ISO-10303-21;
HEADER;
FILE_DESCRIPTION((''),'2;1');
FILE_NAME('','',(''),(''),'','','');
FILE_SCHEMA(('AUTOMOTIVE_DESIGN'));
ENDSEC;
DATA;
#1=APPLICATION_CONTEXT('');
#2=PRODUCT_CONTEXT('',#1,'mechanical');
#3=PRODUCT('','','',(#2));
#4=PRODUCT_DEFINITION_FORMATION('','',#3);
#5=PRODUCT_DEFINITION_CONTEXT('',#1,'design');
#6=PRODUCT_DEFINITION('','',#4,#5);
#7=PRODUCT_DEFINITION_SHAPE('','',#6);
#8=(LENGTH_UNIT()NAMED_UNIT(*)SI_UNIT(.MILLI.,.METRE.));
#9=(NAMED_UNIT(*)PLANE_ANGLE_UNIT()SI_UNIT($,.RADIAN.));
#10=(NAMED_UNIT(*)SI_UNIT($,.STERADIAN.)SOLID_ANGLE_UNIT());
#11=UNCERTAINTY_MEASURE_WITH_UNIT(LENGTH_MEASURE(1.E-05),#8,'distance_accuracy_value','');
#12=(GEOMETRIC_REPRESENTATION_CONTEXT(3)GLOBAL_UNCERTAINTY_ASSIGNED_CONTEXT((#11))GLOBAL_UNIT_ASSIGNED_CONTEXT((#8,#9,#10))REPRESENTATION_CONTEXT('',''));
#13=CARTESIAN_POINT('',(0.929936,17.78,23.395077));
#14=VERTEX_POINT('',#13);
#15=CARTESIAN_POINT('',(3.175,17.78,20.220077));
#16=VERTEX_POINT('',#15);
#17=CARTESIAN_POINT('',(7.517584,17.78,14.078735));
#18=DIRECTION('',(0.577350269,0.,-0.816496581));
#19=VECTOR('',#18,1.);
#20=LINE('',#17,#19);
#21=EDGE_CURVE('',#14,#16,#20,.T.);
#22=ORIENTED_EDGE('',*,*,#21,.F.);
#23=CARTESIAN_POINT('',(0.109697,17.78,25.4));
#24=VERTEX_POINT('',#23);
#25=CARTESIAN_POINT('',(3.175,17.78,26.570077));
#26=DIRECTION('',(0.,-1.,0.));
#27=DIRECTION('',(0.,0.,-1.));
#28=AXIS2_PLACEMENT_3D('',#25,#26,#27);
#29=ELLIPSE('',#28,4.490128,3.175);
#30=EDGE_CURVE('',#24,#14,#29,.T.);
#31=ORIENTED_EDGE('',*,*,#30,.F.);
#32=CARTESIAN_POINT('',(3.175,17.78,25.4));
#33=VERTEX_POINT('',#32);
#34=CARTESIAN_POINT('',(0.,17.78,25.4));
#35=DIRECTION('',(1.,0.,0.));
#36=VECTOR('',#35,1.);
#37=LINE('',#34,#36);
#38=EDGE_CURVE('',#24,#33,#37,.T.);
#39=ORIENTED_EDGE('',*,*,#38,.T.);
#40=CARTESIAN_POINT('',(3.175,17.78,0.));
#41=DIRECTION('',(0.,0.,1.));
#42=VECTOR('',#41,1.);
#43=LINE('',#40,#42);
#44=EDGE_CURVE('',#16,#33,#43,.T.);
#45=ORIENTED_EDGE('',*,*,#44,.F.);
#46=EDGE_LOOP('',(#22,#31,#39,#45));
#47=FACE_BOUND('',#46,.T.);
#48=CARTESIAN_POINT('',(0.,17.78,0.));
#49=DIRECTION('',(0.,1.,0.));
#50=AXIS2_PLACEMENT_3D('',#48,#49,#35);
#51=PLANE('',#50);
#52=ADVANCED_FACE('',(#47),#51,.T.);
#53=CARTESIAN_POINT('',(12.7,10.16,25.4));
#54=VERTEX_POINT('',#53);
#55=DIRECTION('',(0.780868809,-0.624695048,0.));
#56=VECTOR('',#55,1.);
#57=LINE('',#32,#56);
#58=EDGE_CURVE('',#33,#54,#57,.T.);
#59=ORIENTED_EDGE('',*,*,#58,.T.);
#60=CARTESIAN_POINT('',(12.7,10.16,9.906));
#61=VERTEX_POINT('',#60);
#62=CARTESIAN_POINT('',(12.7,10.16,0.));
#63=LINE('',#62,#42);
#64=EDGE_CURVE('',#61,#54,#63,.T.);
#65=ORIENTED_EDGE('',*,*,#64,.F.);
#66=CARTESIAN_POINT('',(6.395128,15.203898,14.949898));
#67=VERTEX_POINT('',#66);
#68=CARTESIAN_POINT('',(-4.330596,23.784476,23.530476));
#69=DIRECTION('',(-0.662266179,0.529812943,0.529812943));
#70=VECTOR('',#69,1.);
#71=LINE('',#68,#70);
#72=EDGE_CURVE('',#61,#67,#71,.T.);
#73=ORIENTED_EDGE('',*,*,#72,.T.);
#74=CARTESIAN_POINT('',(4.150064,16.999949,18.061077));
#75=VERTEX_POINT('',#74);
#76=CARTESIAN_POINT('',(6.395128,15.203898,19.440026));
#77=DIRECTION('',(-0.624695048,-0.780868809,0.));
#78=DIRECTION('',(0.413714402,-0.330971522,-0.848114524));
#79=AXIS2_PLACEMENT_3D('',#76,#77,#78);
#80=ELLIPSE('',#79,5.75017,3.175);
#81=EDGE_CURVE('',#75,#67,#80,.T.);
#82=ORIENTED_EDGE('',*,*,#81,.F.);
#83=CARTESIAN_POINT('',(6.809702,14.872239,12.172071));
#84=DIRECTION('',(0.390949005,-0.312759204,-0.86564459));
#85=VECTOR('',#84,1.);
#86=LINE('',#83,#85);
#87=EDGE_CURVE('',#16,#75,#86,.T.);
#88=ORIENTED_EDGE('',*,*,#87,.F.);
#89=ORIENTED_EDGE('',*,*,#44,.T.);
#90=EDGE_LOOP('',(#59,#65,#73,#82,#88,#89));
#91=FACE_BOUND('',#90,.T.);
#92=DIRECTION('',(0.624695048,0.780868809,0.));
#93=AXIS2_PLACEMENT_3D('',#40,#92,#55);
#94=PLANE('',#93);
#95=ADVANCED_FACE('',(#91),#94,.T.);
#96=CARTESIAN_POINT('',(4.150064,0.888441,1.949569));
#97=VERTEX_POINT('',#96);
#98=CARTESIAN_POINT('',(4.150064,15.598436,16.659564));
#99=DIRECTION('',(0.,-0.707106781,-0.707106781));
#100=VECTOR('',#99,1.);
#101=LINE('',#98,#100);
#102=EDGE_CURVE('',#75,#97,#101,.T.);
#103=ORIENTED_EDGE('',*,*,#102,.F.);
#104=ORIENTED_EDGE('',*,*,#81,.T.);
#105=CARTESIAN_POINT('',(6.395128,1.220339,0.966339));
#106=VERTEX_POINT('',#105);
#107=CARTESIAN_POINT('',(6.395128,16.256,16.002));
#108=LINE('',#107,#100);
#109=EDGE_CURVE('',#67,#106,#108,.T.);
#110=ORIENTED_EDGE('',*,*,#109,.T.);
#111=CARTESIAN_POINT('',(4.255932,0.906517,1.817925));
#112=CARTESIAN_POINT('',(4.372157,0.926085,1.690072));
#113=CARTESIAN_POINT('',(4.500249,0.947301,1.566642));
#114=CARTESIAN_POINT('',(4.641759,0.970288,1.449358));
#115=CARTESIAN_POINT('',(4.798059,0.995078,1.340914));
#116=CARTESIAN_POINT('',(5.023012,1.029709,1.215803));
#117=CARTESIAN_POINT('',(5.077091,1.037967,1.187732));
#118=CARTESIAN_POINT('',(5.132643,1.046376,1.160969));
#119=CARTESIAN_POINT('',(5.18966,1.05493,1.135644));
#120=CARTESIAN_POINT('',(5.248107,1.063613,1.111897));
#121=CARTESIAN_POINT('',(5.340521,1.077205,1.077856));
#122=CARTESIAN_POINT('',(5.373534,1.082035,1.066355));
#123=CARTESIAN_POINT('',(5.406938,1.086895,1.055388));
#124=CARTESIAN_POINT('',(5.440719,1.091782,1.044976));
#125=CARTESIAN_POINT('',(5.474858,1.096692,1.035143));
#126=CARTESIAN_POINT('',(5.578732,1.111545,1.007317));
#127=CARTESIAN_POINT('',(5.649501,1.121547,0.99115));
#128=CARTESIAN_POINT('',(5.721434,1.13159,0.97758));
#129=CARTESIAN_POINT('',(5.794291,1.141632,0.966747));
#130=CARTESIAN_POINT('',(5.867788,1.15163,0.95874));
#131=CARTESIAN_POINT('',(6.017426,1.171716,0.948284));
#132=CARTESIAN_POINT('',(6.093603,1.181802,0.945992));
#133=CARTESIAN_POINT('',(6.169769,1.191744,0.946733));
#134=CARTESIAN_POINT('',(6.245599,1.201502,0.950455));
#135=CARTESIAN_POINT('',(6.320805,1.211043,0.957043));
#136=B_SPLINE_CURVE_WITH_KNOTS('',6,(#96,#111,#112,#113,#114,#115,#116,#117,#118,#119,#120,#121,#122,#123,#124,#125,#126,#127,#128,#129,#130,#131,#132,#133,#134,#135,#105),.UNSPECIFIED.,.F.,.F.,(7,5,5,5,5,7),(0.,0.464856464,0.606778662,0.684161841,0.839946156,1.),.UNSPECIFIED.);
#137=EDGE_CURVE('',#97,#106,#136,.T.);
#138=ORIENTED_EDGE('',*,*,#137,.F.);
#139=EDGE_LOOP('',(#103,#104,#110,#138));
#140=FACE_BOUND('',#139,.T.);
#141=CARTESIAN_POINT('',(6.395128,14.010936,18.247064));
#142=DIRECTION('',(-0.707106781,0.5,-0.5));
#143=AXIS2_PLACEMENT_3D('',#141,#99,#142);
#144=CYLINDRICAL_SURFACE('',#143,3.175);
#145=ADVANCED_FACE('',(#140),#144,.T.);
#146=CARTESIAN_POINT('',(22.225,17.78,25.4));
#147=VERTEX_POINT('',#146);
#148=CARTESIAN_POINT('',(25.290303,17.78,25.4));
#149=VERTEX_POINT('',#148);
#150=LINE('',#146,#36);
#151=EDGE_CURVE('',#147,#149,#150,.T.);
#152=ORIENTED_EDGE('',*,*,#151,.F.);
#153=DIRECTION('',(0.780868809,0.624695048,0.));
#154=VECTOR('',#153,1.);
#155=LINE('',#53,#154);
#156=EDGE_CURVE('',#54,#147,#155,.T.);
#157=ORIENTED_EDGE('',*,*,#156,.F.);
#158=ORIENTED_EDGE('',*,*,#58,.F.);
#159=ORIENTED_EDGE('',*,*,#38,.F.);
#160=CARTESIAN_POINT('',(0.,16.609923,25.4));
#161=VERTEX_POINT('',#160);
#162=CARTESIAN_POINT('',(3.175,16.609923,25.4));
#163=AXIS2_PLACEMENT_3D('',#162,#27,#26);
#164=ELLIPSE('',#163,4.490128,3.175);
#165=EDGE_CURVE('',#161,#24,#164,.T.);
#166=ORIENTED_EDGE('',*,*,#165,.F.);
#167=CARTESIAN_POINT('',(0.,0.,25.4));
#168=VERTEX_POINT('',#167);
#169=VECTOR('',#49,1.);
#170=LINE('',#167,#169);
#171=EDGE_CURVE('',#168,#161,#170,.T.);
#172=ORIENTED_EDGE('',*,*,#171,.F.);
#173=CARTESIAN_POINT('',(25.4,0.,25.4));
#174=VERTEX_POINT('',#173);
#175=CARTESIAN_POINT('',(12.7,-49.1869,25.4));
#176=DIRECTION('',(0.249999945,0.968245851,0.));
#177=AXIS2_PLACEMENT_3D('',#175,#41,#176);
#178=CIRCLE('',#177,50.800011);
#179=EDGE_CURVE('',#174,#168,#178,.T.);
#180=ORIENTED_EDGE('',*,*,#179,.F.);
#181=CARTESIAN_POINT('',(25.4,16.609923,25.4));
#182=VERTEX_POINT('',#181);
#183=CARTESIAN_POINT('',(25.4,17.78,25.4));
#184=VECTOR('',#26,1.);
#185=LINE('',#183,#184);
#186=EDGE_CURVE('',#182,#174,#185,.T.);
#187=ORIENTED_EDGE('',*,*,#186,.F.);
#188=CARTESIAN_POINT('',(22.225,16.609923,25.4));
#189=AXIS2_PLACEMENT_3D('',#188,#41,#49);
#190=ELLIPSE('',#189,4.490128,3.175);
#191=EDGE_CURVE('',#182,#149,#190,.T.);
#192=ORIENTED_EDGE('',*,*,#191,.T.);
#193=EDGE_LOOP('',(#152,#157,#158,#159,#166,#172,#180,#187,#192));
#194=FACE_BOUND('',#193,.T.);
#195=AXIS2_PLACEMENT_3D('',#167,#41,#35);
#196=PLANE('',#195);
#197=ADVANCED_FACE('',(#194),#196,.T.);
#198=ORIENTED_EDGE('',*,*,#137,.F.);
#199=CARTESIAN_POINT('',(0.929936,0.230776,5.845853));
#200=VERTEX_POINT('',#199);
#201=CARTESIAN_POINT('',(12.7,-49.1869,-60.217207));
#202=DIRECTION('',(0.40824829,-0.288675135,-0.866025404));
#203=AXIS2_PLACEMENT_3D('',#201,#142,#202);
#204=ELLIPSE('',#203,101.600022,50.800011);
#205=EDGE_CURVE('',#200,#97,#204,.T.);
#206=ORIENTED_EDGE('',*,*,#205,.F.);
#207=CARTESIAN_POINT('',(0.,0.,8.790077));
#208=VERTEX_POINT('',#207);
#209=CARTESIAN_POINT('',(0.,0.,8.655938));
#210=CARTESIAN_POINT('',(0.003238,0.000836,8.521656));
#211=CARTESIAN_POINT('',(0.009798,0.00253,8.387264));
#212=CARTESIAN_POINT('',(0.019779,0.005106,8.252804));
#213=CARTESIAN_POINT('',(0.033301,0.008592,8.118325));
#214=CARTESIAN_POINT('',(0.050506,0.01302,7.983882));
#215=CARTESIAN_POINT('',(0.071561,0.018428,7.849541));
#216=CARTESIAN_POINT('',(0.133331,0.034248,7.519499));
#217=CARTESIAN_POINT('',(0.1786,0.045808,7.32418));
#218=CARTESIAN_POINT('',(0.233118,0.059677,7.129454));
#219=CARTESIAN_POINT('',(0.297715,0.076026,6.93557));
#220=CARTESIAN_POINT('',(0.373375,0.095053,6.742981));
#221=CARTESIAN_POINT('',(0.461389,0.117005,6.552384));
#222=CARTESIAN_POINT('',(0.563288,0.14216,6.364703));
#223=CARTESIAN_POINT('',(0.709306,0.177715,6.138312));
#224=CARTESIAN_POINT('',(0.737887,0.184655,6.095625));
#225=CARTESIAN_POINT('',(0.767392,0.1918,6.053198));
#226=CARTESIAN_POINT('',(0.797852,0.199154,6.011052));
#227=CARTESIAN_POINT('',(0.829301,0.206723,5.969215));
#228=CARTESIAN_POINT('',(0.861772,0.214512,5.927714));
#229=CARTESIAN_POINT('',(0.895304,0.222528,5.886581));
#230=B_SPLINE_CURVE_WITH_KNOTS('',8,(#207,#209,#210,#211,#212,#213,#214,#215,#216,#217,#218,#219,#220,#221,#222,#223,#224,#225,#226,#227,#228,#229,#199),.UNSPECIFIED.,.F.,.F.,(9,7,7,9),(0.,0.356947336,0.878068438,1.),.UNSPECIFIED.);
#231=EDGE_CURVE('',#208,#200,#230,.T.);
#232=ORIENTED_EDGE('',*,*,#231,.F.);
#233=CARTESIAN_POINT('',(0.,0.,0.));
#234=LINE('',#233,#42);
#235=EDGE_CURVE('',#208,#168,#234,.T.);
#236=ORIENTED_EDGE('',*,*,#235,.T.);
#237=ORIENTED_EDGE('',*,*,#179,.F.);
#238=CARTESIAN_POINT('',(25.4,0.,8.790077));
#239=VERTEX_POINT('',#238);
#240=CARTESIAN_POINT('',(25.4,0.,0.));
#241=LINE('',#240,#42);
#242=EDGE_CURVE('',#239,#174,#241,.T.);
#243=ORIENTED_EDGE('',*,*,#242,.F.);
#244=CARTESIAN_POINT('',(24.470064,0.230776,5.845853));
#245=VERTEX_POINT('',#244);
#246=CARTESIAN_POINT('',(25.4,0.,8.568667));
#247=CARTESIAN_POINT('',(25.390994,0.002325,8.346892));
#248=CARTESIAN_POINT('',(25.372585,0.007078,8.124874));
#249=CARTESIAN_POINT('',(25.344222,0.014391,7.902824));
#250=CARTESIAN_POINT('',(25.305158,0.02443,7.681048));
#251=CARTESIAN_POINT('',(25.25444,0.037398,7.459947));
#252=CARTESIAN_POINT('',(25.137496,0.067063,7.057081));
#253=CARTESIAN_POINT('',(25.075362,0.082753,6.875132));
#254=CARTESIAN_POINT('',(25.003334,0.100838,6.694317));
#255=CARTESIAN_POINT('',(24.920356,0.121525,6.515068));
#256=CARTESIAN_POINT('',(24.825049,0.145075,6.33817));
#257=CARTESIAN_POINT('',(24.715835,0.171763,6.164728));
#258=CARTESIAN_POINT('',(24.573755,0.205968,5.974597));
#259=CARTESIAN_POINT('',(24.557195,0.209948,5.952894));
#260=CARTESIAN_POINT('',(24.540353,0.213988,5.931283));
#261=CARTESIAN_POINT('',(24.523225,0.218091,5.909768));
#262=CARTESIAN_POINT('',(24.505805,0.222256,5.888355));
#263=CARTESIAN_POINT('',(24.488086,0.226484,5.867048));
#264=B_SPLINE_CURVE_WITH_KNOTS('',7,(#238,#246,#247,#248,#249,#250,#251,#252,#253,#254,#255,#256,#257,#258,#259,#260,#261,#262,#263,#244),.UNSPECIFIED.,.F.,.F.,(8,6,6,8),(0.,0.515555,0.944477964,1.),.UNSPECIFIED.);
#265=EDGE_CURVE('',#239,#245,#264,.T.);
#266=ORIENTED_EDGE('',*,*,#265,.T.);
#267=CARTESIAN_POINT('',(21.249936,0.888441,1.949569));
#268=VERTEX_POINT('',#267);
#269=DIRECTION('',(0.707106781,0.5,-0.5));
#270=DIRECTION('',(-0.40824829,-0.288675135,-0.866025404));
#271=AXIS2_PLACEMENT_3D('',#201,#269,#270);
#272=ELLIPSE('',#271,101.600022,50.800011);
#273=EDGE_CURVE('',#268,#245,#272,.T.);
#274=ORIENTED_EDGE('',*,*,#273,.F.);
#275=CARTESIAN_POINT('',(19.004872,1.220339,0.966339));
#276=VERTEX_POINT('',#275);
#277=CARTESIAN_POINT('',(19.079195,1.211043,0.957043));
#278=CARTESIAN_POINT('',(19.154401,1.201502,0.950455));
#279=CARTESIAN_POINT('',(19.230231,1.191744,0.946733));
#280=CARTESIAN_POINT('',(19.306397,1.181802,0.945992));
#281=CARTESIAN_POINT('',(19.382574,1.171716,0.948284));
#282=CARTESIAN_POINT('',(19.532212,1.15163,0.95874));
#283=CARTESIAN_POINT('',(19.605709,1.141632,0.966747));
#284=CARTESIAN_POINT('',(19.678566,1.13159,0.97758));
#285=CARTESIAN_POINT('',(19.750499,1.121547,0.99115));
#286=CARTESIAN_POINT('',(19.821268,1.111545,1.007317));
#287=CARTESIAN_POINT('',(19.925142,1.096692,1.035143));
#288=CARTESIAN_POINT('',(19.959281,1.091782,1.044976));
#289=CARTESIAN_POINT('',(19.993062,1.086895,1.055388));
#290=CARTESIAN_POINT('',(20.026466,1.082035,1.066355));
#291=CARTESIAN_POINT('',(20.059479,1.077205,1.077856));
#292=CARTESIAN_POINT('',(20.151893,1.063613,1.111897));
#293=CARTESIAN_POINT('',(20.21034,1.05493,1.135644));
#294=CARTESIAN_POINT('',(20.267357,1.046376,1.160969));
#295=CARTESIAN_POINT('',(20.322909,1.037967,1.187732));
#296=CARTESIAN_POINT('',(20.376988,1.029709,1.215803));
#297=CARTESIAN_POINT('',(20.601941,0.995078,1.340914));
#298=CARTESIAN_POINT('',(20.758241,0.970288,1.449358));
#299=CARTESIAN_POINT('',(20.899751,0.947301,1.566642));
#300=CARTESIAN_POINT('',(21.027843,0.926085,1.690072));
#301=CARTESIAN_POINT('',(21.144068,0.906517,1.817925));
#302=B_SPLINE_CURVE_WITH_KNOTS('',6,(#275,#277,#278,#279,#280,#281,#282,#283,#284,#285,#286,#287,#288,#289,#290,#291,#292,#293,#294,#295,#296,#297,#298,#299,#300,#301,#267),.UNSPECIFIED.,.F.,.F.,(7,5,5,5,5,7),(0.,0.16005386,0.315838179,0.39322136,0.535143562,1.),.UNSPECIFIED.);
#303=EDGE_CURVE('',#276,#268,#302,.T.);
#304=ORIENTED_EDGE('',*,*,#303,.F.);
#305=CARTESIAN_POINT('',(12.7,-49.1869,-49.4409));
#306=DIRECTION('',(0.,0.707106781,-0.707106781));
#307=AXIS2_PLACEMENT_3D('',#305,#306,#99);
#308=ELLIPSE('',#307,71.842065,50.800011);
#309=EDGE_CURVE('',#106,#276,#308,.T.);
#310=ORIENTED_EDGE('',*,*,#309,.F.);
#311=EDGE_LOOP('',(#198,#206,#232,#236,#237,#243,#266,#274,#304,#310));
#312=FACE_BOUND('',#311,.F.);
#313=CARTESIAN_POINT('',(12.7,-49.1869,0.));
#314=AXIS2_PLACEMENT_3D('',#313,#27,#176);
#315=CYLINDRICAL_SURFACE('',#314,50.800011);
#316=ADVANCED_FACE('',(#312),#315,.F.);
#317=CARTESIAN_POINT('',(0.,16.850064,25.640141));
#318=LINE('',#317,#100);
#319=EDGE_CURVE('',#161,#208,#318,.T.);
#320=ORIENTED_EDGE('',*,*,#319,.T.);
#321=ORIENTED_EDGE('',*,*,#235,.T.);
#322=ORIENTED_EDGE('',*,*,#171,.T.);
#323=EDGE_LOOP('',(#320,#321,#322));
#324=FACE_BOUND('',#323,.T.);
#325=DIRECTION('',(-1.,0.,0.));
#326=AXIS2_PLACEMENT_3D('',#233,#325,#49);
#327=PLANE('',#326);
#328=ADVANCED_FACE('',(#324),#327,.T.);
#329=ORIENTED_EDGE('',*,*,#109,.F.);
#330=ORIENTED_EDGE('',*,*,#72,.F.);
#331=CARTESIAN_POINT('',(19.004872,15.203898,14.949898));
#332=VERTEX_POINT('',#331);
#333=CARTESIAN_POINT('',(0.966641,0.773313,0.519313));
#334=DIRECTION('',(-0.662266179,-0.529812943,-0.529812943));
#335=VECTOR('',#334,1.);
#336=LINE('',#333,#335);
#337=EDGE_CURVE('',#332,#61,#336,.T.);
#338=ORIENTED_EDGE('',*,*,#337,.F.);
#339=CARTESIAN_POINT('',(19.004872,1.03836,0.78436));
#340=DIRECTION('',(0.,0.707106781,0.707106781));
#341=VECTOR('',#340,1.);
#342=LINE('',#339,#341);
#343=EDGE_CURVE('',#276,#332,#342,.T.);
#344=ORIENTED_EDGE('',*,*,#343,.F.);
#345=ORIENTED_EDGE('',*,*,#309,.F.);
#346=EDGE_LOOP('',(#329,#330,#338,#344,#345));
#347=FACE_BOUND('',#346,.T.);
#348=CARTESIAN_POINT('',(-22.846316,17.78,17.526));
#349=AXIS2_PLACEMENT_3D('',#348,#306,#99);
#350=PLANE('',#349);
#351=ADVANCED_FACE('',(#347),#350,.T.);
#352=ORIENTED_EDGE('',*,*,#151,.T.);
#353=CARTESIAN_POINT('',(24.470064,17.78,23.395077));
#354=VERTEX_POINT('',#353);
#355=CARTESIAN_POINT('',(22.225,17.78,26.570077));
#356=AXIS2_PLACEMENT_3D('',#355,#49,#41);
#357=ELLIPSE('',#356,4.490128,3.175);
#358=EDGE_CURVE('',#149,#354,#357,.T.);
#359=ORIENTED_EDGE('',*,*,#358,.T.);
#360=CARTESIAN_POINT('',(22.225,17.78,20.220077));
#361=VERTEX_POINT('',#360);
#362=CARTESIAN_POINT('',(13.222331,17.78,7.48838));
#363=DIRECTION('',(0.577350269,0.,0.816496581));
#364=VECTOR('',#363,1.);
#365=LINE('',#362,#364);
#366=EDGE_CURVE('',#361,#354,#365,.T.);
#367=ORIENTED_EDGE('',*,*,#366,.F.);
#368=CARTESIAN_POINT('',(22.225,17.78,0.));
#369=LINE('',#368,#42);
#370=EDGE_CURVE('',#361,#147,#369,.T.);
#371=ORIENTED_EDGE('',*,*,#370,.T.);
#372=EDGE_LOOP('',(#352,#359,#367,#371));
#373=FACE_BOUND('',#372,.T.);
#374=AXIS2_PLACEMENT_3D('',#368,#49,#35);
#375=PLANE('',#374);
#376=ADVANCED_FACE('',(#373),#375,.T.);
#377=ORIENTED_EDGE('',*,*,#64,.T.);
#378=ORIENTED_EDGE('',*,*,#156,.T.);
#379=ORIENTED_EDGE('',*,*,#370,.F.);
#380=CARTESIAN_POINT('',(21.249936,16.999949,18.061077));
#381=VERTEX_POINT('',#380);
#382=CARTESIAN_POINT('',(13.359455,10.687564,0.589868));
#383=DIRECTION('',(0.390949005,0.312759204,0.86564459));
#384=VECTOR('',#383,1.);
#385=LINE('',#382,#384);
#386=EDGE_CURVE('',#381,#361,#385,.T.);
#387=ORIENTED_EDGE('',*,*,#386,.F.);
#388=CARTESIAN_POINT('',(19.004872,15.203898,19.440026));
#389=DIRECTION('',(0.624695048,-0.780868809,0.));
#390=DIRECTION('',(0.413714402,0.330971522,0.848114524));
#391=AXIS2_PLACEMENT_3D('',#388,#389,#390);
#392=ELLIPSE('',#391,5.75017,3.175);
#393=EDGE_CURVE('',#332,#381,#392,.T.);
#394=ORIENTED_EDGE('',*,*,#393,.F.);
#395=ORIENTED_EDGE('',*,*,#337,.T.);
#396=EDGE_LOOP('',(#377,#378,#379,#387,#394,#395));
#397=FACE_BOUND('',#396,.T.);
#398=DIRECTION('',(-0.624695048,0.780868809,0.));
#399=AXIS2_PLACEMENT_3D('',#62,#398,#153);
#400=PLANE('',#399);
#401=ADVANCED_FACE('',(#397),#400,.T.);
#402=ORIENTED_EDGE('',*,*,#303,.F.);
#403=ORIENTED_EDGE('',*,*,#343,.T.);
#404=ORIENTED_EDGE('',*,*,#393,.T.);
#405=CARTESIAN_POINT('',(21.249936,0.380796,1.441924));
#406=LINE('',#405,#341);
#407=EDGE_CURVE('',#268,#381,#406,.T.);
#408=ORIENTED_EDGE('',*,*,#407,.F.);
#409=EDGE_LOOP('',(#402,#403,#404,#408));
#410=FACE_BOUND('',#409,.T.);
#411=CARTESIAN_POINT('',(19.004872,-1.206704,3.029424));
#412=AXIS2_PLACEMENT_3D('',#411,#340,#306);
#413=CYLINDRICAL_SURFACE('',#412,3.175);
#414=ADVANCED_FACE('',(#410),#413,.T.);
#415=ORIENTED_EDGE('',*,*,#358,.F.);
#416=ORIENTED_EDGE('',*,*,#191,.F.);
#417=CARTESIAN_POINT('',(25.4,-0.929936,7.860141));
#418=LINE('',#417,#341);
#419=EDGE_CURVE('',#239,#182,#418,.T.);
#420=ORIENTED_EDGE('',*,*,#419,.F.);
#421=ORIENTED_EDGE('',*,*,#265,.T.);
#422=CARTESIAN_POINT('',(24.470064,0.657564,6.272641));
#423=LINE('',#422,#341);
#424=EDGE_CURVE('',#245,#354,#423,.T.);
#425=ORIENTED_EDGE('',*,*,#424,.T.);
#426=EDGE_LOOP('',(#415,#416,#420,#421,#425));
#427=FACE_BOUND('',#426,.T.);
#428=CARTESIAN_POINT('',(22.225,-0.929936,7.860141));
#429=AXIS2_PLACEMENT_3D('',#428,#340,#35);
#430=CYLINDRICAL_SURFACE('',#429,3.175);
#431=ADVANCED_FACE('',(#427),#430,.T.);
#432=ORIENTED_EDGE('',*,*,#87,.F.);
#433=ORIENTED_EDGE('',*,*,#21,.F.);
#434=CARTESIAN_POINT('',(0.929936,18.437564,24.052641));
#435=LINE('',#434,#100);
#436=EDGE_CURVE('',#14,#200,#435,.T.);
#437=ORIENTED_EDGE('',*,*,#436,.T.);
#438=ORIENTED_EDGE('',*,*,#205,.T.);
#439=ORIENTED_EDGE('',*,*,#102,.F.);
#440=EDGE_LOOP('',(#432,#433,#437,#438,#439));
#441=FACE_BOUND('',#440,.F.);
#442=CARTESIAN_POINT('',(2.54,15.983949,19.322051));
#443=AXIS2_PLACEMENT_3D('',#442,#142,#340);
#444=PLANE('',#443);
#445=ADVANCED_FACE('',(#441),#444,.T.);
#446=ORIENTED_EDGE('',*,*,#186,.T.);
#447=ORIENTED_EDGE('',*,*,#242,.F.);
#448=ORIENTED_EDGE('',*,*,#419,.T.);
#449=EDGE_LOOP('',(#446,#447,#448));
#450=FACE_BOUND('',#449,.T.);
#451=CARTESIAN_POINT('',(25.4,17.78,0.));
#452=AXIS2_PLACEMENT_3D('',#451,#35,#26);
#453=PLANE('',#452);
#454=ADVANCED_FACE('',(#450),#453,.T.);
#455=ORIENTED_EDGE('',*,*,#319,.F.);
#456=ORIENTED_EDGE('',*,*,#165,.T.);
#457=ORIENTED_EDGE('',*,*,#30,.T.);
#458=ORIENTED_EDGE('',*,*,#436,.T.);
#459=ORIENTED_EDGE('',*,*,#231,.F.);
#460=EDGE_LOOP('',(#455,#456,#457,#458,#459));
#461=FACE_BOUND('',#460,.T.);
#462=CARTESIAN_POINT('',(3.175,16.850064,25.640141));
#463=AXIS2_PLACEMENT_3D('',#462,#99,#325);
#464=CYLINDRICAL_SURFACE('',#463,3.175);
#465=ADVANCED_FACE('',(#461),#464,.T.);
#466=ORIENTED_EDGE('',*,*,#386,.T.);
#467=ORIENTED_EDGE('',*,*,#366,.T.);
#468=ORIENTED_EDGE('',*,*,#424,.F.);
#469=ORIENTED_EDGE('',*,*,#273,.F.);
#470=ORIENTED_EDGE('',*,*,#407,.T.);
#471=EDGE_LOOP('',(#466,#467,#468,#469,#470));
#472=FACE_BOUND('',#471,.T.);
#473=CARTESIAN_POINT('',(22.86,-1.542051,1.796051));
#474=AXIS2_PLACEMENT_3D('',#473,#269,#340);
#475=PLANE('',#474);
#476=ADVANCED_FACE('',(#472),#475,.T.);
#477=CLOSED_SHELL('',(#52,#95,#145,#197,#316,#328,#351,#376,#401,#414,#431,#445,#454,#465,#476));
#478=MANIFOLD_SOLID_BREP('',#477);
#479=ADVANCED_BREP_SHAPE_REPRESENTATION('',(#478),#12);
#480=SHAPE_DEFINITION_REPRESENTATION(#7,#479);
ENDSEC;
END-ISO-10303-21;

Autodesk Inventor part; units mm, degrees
ref_plane "YZ Plane" through (0, 0, 0) normal (1, 0, 0) x (0, 1, 0)
ref_plane "XZ Plane" through (0, 0, 0) normal (0, 1, 0) x (-1, 0, 0)
ref_plane "XY Plane" through (0, 0, 0) normal (0, 0, 1) x (1, 0, 0)
sketch "Sketch1" plane through (0, 0, 0) normal (0, 0, 1) x (1, 0, 0)
  line L0 (0, 0) -> (0, 17.78)
  line L1 (25.4, 17.78) -> (25.4, 0)
  arc A0 (25.4, 0) -> (0, 0) centre (12.7, -49.1869) ccw
  line L2 (0, 17.78) -> (3.175, 17.78)
  line L3 (3.175, 17.78) -> (12.7, 10.16)
  line L4 (12.7, 10.16) -> (22.225, 17.78)
  line L5 (22.225, 17.78) -> (25.4, 17.78)
  dimension "d4" = 17.78
  dimension "d5" = 25.4
  dimension "d6" = 101.6
  dimension "d7" = 3.175
  dimension "d8" = 7.62
extrude "Extrusion1" add sketch "Sketch1" along normal blind 25.4
chamfer "Chamfer1" distance 17.526 angle 45 2 edges at (23.8125, 17.78, 0) (1.5875, 17.78, 0)
chamfer "Chamfer2" distance 5.08 angle 45 2 edges at (25.4, 9.017, 8.763) (0, 9.017, 8.763)
fillet "Fillet1" radius 3.175 4 edges at (25.4, 8.89, 15.8202) (20.32, 8.6472, 8.3932) (5.08, 8.6472, 8.3932) (0, 8.89, 15.8202)
properties part number "RearMount" material "ABS Plastic"
